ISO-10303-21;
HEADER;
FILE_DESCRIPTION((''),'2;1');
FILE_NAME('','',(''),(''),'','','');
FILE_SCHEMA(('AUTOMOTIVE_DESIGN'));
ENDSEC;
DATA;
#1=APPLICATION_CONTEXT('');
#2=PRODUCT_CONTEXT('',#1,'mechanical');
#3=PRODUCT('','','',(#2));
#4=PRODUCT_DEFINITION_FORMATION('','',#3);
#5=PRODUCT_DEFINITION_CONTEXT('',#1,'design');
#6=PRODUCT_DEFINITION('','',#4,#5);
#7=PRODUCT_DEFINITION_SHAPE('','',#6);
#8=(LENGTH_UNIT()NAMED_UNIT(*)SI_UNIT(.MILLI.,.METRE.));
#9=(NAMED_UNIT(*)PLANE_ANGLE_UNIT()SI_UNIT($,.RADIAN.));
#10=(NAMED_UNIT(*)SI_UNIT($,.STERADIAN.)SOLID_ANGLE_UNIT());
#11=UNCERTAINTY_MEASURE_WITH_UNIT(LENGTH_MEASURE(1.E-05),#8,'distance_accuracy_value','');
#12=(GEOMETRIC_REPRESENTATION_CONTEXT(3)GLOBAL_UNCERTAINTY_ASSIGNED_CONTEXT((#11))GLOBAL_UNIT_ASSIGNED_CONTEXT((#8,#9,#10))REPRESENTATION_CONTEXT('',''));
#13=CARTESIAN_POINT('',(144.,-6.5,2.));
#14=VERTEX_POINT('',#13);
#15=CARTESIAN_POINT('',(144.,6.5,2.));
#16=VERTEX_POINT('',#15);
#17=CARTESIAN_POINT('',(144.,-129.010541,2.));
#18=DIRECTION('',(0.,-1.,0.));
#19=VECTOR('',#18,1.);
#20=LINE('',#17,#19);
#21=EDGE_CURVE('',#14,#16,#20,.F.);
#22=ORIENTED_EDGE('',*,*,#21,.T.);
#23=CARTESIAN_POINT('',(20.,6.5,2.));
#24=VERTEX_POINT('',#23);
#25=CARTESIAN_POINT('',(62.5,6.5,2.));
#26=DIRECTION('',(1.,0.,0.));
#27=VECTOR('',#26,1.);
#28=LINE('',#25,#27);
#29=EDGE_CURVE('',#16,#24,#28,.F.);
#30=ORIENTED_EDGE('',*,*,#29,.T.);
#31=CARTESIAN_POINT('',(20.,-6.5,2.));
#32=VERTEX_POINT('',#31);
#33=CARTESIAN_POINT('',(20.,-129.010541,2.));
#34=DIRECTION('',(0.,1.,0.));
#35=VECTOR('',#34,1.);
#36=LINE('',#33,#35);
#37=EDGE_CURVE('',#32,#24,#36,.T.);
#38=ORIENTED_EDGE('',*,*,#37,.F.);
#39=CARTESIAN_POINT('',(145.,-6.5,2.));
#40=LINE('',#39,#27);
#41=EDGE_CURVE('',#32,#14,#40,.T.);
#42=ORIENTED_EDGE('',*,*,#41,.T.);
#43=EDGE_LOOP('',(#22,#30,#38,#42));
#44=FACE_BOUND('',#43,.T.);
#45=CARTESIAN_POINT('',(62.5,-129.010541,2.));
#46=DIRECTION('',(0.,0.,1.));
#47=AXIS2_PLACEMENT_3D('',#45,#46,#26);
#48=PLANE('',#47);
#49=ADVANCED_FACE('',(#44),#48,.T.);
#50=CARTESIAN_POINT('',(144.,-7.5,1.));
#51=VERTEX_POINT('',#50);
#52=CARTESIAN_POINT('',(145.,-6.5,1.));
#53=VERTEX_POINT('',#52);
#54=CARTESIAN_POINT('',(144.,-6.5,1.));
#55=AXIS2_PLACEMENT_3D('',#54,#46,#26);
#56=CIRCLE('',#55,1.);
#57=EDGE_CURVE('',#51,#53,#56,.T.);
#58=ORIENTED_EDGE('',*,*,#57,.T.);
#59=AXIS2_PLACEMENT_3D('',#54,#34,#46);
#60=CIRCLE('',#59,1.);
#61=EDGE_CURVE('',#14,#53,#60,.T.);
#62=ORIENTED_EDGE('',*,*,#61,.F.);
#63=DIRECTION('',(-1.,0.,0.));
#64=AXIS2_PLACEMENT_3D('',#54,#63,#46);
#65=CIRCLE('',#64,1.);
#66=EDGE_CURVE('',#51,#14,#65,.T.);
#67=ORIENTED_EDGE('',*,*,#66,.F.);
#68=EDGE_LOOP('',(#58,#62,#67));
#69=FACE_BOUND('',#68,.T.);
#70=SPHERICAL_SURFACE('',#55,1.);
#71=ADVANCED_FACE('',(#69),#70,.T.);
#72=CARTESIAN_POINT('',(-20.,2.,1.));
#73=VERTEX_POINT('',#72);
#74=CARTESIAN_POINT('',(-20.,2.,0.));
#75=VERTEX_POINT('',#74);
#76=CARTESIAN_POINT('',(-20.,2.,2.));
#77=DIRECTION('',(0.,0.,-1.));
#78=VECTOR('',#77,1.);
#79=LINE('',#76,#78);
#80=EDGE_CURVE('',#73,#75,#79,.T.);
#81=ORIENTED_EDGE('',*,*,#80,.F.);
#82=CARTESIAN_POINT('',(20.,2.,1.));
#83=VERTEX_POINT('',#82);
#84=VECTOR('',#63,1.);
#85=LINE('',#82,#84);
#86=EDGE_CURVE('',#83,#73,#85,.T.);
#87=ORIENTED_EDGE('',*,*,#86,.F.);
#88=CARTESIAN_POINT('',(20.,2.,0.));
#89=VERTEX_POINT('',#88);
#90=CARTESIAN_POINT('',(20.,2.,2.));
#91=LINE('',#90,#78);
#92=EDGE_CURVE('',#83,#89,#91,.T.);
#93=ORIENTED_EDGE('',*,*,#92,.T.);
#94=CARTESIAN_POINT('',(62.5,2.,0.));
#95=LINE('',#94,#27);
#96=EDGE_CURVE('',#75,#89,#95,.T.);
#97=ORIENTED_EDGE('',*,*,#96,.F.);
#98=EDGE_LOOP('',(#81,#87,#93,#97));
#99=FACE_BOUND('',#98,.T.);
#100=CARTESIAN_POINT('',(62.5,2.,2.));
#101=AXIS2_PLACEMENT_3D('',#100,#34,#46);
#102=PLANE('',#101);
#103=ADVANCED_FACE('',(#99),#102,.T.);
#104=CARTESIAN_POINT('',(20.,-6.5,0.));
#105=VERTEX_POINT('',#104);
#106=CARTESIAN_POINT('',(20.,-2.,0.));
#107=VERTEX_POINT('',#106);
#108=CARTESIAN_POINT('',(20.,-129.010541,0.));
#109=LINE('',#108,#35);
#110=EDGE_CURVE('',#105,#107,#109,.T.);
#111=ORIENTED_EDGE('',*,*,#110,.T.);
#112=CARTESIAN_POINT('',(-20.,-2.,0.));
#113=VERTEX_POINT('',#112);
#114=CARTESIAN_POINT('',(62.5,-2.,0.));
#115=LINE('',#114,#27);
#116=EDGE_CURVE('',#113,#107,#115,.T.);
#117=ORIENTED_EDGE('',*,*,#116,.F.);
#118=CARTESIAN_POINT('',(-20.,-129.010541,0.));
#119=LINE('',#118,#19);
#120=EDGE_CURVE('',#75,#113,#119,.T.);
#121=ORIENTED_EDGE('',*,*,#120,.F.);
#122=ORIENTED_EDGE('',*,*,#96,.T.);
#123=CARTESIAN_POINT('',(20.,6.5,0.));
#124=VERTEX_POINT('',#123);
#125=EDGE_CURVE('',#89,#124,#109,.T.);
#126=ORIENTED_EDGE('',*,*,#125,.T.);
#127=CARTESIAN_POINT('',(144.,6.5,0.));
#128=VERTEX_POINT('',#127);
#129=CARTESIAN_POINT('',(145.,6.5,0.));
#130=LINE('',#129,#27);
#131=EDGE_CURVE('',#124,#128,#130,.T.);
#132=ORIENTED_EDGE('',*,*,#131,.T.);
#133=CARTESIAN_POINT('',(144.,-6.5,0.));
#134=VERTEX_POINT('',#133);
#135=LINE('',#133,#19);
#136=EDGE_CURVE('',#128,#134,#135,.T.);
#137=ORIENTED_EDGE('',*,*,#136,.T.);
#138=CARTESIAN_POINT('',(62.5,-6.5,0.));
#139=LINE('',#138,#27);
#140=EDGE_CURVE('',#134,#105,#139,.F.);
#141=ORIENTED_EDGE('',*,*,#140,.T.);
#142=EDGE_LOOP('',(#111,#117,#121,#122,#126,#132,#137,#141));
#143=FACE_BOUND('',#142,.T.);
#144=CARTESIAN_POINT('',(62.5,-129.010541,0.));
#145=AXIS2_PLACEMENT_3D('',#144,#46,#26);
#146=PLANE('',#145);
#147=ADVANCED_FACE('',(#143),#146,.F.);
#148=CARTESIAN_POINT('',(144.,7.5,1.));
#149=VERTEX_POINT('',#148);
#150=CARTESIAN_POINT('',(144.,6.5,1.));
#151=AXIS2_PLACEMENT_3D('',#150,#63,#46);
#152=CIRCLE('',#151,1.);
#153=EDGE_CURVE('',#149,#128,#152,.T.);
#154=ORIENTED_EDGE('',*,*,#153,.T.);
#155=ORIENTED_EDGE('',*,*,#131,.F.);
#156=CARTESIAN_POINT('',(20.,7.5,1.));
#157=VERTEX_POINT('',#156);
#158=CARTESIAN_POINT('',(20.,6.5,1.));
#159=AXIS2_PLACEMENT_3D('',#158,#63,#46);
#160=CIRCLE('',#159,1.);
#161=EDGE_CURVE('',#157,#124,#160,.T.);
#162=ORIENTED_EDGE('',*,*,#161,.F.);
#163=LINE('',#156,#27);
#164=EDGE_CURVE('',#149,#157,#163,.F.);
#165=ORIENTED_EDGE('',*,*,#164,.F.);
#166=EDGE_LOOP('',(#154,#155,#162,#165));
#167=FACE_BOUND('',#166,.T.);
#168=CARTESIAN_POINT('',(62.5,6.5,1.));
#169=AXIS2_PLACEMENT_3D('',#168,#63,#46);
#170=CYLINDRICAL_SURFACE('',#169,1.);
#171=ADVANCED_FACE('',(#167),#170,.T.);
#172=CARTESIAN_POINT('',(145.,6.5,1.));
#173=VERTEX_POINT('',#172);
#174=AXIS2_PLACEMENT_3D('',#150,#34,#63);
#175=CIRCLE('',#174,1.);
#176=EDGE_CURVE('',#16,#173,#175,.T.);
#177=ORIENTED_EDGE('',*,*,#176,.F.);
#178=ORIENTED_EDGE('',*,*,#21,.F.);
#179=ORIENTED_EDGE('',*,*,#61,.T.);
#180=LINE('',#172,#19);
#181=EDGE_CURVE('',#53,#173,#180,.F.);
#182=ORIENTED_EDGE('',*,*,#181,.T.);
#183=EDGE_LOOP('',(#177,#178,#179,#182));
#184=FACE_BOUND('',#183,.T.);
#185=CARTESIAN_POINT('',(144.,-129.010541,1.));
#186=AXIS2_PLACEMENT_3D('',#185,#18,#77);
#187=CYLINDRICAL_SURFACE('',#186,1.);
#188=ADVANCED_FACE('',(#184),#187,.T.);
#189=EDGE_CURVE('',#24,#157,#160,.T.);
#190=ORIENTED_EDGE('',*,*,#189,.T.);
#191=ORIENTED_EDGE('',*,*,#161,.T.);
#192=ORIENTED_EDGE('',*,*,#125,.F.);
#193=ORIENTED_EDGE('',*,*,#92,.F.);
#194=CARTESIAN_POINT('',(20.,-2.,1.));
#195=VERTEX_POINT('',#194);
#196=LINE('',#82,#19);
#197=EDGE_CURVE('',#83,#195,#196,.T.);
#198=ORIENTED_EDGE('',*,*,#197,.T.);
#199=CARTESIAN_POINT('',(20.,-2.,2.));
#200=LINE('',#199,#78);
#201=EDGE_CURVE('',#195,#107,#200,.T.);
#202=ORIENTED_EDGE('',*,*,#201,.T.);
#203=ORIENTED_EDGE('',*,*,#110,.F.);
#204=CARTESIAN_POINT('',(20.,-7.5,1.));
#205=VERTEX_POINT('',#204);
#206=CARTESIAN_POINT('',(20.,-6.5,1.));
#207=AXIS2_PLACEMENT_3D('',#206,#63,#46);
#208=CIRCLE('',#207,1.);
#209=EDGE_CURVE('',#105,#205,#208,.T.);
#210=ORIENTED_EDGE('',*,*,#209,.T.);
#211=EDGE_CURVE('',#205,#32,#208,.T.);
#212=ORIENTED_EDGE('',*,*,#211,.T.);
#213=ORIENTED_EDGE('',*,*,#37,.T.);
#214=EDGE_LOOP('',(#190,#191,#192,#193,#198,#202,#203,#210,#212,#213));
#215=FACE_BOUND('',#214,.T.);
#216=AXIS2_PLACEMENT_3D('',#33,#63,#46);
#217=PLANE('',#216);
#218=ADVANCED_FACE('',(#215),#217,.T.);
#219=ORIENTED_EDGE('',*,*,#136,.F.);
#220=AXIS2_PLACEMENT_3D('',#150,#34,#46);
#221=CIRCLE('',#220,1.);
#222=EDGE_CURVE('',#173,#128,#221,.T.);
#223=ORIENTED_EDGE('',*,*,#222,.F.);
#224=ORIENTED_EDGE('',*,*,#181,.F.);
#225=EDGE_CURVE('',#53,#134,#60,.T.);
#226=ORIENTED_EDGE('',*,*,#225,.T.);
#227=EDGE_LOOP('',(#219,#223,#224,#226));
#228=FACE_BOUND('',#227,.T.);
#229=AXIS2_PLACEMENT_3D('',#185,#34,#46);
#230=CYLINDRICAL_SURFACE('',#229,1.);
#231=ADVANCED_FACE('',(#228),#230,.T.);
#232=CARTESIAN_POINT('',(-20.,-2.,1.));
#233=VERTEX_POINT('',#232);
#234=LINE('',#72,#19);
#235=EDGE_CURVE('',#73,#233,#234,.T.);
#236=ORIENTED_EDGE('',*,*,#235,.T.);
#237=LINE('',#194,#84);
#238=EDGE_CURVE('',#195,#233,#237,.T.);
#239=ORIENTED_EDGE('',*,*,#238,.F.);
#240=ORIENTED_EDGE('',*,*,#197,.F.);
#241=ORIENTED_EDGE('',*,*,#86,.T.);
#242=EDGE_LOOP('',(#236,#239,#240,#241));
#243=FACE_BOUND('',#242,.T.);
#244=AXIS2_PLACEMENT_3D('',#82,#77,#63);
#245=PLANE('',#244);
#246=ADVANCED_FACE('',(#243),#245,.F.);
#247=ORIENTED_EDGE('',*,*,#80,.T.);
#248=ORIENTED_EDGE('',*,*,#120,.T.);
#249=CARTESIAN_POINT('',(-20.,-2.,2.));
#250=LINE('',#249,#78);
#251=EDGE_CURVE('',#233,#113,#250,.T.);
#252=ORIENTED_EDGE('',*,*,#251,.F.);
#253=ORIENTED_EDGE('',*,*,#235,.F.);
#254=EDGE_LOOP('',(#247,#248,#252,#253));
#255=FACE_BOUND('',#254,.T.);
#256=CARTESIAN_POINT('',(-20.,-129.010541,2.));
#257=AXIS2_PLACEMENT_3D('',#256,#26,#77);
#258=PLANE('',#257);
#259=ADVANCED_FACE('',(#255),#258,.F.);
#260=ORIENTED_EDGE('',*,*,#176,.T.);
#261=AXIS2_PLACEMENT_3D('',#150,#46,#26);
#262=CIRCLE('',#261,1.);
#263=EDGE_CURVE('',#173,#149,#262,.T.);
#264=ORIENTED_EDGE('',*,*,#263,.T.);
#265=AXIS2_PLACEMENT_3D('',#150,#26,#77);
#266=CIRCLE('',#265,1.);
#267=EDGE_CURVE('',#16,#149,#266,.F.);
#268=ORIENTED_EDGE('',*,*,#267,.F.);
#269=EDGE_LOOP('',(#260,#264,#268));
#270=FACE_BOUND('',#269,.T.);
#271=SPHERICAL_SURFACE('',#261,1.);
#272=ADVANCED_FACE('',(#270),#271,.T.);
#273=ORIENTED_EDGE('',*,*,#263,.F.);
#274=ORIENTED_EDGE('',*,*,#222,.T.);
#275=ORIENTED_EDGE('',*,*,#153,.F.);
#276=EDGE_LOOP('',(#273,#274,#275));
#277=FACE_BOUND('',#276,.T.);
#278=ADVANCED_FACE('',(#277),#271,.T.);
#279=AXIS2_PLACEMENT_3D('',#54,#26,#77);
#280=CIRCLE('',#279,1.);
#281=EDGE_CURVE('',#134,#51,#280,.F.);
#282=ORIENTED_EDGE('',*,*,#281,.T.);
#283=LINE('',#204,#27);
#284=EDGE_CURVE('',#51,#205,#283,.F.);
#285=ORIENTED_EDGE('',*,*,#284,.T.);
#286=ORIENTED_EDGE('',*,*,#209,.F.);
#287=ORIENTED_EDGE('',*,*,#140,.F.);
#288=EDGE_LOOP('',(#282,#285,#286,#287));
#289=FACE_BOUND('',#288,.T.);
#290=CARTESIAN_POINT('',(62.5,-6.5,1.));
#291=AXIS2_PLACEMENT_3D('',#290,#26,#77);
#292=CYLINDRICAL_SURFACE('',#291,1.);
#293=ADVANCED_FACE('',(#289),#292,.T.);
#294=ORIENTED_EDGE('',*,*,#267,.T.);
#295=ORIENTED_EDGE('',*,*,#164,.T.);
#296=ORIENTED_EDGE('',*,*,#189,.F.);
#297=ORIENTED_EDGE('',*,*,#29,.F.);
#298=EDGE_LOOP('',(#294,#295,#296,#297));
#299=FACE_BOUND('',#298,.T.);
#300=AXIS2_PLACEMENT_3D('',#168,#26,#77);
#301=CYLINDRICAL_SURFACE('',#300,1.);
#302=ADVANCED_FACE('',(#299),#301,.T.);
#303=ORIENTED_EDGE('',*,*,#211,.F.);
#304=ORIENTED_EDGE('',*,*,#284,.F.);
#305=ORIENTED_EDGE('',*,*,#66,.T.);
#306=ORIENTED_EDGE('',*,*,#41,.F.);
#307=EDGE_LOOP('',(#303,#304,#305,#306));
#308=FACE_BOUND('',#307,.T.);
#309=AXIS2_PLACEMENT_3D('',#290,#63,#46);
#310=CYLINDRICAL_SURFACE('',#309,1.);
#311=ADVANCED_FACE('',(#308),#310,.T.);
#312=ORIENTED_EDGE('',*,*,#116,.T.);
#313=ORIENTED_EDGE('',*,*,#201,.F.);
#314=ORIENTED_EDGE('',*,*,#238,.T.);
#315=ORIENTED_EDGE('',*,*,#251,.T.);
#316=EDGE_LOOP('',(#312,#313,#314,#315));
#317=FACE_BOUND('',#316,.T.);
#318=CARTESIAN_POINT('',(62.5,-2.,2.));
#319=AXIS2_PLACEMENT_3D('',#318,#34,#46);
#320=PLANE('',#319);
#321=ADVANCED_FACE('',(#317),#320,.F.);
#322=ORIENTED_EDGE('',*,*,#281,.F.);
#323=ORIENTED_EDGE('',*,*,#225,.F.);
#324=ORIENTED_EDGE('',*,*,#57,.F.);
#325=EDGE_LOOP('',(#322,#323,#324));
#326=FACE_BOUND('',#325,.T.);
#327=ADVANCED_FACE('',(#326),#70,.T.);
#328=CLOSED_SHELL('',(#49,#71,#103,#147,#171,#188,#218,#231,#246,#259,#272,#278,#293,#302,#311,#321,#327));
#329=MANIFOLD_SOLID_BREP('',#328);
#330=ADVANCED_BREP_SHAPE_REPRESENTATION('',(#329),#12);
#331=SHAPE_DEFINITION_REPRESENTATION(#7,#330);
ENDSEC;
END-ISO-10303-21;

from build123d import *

# Parameters (mm, degrees)
ESQUISSE1_W             = 40
ESQUISSE1_H             = 4
BOSS_EXTRU_2_DEPTH      = 2
ESQUISSE2_W             = 1
ESQUISSE2_H             = 4
ENL_V_MAT_EXTRU_1_DEPTH = 40
CONG_1_R                = 1
CONG_2_R                = 1


with BuildPart() as part:
    # Esquisse1 → Boss.-Extru.2 (new body)
    with BuildSketch(Plane.XY):
        Rectangle(ESQUISSE1_W, ESQUISSE1_H)
        Polygon((145, 7.5), (145, -7.5), (20, -7.5), (20, -2), (20, 2), (20, 7.5), align=None)
    extrude(amount=BOSS_EXTRU_2_DEPTH)

    # Esquisse2 → Enlèv. mat.-Extru.1 (cut)
    with BuildSketch(Plane.ZY.offset(20)):
        with Locations((1.5, 0)):
            Rectangle(ESQUISSE2_W, ESQUISSE2_H)
    extrude(amount=-ENL_V_MAT_EXTRU_1_DEPTH, mode=Mode.SUBTRACT)

    # Congé1
    cong_1_edges = [part.edges().sort_by_distance(p)[0] for p in [
        (82.5, -7.5, 0),
        (82.5, -7.5, 2),
        (82.5, 7.5, 2),
        (82.5, 7.5, 0),
    ]]
    fillet(cong_1_edges, radius=CONG_1_R - 0.0001)  # a hair under: the kernel refuses the full size

    # Congé2
    cong_2_edges = [part.edges().sort_by_distance(p)[0] for p in [
        (145, 0, 0),
        (145, 0, 2),
        (145, 7.207136071, 0.292863929),
        (145, 7.207136071, 1.707136071),
        (145, -7.207136071, 1.707136071),
        (145, -7.207136071, 0.292863929),
    ]]
    fillet(cong_2_edges, radius=CONG_2_R - 0.0001)  # a hair under: the kernel refuses the full size


solid = part.part
